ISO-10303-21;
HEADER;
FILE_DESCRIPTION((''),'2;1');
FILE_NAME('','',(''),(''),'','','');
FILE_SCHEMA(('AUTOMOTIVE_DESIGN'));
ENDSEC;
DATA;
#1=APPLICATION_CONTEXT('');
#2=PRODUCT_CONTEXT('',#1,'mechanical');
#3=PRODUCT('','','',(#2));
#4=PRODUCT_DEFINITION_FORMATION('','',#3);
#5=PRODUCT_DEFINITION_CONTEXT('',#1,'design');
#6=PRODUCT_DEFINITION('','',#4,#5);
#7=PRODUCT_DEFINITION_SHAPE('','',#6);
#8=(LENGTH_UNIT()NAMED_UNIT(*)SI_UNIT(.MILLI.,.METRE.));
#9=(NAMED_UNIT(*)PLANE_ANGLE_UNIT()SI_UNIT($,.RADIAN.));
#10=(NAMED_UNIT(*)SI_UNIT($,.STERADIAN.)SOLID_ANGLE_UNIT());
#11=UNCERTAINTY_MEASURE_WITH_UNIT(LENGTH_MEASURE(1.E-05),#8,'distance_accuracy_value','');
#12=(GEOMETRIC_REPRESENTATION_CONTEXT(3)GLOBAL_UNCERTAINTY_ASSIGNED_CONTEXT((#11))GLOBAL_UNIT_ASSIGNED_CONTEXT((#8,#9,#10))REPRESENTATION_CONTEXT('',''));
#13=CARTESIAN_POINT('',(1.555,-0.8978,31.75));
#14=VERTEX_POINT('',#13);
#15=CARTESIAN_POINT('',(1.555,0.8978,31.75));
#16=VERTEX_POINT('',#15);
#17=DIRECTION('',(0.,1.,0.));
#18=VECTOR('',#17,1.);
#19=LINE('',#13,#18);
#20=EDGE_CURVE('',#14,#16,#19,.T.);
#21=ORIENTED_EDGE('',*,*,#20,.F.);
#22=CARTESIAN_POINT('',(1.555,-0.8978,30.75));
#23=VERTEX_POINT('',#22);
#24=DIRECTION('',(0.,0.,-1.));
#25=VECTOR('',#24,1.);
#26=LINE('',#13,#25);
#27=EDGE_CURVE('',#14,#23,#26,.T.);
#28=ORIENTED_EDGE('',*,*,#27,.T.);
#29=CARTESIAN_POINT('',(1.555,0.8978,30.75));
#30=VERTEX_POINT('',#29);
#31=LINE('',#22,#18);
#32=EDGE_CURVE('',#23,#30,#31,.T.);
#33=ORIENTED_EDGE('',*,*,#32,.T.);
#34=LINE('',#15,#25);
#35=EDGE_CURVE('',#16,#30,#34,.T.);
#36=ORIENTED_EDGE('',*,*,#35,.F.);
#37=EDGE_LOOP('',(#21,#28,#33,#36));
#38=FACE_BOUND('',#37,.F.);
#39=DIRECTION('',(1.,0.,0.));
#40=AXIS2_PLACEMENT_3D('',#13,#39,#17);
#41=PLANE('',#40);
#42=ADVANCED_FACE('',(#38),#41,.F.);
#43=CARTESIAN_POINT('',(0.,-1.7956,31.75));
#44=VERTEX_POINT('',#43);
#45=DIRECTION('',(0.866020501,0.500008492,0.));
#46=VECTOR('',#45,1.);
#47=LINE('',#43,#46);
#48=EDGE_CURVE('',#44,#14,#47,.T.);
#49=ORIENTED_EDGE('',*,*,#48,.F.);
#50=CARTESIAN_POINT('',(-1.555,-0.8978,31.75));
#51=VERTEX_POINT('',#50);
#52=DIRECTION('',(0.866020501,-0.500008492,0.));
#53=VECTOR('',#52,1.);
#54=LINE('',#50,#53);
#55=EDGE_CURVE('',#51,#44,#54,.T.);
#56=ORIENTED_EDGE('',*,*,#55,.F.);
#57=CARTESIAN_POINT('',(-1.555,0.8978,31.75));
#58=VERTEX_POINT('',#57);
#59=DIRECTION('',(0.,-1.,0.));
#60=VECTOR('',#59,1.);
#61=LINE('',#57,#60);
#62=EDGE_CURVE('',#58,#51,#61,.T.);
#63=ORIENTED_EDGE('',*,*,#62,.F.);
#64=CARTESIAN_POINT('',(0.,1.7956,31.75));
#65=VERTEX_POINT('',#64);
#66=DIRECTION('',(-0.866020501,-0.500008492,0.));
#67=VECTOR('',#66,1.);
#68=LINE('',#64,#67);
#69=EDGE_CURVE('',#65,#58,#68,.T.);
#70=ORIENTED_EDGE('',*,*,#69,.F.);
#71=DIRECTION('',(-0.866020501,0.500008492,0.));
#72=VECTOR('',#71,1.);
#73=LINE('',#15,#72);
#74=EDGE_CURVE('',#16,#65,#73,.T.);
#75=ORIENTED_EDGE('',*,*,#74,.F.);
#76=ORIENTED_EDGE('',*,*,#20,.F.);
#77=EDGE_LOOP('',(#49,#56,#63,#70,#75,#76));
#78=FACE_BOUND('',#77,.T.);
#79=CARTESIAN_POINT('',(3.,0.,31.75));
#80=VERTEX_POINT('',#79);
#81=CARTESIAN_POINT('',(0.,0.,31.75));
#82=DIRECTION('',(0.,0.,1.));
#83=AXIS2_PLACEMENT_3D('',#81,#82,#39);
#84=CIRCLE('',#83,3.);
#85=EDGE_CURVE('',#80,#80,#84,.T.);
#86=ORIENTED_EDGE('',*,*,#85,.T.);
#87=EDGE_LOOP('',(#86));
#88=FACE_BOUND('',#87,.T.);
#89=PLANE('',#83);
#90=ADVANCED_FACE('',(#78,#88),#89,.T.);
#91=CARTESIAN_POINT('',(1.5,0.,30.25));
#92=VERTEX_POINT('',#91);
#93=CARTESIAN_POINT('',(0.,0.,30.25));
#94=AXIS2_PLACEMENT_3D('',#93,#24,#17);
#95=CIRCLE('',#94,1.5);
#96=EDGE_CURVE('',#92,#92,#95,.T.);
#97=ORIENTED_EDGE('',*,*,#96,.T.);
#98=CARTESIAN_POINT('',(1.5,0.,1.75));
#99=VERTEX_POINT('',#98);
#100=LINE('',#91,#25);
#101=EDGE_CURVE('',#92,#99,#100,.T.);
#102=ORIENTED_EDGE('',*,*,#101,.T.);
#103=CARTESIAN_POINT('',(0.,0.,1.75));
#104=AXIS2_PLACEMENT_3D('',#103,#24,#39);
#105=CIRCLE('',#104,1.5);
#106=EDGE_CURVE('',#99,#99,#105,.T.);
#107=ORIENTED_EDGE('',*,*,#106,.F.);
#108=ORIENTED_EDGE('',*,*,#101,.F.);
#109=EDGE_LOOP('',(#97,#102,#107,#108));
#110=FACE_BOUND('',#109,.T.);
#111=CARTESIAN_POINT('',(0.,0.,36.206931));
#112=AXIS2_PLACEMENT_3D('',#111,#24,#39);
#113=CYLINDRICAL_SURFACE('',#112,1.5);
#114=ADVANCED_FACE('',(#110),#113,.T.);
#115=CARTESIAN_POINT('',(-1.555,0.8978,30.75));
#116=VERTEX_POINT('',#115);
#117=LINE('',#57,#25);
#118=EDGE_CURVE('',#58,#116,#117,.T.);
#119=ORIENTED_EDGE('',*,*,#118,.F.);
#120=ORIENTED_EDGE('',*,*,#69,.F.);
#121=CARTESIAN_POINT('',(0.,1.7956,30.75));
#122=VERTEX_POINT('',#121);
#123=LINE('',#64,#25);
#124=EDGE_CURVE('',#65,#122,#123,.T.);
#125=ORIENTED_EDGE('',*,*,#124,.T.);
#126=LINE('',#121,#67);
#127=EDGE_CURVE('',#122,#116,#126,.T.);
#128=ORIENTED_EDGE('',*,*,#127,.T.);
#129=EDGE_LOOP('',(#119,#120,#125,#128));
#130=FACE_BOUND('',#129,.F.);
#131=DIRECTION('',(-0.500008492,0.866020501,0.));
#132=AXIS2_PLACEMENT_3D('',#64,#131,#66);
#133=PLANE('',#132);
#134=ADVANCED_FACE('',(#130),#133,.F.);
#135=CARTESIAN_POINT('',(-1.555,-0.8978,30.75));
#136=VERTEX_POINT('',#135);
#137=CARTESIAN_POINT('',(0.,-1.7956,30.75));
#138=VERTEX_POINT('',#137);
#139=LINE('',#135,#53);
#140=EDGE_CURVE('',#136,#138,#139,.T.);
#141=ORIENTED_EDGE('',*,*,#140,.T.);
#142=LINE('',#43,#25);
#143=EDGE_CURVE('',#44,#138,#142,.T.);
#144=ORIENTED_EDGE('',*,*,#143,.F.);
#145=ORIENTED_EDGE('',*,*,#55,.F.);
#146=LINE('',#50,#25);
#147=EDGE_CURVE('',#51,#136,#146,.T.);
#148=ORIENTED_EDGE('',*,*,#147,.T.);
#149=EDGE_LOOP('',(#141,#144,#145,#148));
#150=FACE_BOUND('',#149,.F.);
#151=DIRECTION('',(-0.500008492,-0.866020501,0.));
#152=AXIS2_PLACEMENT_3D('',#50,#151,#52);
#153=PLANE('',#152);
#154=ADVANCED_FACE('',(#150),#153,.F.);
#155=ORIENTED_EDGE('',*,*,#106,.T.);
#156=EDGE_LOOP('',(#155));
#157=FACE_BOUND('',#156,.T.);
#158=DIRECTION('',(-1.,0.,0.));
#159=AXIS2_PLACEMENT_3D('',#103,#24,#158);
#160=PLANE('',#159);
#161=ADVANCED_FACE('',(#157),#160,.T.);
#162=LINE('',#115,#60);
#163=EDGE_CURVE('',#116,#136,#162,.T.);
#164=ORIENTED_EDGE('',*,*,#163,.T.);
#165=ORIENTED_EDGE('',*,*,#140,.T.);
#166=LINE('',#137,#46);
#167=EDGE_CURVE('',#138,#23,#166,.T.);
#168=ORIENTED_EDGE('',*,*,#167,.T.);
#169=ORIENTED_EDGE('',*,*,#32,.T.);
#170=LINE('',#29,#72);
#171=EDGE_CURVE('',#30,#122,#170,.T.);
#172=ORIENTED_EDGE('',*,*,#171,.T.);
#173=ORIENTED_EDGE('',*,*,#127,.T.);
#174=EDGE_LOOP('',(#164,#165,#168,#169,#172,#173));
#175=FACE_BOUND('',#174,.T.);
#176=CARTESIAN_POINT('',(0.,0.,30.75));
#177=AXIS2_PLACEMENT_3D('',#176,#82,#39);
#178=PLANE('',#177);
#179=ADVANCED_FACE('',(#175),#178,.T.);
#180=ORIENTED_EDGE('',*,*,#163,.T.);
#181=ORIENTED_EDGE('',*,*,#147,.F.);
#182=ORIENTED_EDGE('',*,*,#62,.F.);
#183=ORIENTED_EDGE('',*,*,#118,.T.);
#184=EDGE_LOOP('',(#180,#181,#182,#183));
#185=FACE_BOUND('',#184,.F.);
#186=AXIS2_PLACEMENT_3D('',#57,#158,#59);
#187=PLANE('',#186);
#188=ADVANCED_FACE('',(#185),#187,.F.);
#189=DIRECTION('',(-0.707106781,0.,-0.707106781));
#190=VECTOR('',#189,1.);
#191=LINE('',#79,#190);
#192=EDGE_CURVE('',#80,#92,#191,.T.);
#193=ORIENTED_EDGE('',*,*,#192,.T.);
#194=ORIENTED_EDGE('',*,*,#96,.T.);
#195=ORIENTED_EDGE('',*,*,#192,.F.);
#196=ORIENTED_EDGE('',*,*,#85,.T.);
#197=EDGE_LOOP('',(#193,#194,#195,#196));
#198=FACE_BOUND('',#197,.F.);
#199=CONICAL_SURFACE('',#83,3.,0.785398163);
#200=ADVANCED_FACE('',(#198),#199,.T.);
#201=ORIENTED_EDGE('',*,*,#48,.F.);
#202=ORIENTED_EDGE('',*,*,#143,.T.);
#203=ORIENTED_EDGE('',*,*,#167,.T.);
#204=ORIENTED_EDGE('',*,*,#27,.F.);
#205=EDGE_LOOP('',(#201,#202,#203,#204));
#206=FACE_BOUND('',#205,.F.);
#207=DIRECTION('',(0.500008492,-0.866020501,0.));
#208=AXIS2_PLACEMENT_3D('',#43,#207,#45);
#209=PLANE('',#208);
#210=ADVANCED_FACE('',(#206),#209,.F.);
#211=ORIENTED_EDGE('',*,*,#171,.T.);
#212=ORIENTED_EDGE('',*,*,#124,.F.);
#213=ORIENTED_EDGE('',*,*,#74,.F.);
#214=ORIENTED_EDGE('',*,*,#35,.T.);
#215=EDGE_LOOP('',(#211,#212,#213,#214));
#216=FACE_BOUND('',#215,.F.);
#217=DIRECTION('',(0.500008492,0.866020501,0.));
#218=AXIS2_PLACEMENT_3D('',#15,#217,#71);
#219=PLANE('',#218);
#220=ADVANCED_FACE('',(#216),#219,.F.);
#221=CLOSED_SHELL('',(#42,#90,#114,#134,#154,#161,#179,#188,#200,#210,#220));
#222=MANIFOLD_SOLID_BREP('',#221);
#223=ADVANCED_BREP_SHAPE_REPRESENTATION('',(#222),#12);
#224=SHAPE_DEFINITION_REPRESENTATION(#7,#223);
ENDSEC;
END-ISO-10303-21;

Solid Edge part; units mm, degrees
sketch "Sketch1" plane through (0, 0, 0) normal (0, 0, 1) x (1, 0, 0)
  circle A0 centre (0, 0) radius 1.5
extrude "Protrusion1" add sketch "Sketch1" along normal blind 30
sketch "Sketch2" plane through (0, 0, 30) normal (0, 0, 1) x (1, 0, 0)
  circle A0 centre (0, 0) radius 3
extrude "ExtrudedProtrusion_2" add sketch "Sketch2" along normal blind 1.75
chamfer "Chamfer_1" distance 1.75 angle 45 1 edges at (-3, 0, 30)
sketch "Sketch3" plane through (0, 0, 31.75) normal (0, 0, 1) x (0, 1, 0)
  line L0 (0.8978, -1.555) -> (1.7956, 0)
  line L1 (1.7956, 0) -> (0.8978, 1.555)
  line L2 (0.8978, 1.555) -> (-0.8978, 1.555)
  line L3 (-0.8978, 1.555) -> (-1.7956, 0)
  line L4 (-1.7956, 0) -> (-0.8978, -1.555)
  line L5 (-0.8978, -1.555) -> (0.8978, -1.555)
extrude "ExtrudedCutout_1" cut sketch "Sketch3" against normal blind 1
sketch "Sketch4" plane through (0, 0, 0) normal (0, 0, -1) x (0, 1, 0)
  circle A0 centre (0, 0) radius 1.6599
extrude "ExtrudedCutout_2" cut sketch "Sketch4" against normal blind 1.75
properties material "Iron, grey cast type 20"
